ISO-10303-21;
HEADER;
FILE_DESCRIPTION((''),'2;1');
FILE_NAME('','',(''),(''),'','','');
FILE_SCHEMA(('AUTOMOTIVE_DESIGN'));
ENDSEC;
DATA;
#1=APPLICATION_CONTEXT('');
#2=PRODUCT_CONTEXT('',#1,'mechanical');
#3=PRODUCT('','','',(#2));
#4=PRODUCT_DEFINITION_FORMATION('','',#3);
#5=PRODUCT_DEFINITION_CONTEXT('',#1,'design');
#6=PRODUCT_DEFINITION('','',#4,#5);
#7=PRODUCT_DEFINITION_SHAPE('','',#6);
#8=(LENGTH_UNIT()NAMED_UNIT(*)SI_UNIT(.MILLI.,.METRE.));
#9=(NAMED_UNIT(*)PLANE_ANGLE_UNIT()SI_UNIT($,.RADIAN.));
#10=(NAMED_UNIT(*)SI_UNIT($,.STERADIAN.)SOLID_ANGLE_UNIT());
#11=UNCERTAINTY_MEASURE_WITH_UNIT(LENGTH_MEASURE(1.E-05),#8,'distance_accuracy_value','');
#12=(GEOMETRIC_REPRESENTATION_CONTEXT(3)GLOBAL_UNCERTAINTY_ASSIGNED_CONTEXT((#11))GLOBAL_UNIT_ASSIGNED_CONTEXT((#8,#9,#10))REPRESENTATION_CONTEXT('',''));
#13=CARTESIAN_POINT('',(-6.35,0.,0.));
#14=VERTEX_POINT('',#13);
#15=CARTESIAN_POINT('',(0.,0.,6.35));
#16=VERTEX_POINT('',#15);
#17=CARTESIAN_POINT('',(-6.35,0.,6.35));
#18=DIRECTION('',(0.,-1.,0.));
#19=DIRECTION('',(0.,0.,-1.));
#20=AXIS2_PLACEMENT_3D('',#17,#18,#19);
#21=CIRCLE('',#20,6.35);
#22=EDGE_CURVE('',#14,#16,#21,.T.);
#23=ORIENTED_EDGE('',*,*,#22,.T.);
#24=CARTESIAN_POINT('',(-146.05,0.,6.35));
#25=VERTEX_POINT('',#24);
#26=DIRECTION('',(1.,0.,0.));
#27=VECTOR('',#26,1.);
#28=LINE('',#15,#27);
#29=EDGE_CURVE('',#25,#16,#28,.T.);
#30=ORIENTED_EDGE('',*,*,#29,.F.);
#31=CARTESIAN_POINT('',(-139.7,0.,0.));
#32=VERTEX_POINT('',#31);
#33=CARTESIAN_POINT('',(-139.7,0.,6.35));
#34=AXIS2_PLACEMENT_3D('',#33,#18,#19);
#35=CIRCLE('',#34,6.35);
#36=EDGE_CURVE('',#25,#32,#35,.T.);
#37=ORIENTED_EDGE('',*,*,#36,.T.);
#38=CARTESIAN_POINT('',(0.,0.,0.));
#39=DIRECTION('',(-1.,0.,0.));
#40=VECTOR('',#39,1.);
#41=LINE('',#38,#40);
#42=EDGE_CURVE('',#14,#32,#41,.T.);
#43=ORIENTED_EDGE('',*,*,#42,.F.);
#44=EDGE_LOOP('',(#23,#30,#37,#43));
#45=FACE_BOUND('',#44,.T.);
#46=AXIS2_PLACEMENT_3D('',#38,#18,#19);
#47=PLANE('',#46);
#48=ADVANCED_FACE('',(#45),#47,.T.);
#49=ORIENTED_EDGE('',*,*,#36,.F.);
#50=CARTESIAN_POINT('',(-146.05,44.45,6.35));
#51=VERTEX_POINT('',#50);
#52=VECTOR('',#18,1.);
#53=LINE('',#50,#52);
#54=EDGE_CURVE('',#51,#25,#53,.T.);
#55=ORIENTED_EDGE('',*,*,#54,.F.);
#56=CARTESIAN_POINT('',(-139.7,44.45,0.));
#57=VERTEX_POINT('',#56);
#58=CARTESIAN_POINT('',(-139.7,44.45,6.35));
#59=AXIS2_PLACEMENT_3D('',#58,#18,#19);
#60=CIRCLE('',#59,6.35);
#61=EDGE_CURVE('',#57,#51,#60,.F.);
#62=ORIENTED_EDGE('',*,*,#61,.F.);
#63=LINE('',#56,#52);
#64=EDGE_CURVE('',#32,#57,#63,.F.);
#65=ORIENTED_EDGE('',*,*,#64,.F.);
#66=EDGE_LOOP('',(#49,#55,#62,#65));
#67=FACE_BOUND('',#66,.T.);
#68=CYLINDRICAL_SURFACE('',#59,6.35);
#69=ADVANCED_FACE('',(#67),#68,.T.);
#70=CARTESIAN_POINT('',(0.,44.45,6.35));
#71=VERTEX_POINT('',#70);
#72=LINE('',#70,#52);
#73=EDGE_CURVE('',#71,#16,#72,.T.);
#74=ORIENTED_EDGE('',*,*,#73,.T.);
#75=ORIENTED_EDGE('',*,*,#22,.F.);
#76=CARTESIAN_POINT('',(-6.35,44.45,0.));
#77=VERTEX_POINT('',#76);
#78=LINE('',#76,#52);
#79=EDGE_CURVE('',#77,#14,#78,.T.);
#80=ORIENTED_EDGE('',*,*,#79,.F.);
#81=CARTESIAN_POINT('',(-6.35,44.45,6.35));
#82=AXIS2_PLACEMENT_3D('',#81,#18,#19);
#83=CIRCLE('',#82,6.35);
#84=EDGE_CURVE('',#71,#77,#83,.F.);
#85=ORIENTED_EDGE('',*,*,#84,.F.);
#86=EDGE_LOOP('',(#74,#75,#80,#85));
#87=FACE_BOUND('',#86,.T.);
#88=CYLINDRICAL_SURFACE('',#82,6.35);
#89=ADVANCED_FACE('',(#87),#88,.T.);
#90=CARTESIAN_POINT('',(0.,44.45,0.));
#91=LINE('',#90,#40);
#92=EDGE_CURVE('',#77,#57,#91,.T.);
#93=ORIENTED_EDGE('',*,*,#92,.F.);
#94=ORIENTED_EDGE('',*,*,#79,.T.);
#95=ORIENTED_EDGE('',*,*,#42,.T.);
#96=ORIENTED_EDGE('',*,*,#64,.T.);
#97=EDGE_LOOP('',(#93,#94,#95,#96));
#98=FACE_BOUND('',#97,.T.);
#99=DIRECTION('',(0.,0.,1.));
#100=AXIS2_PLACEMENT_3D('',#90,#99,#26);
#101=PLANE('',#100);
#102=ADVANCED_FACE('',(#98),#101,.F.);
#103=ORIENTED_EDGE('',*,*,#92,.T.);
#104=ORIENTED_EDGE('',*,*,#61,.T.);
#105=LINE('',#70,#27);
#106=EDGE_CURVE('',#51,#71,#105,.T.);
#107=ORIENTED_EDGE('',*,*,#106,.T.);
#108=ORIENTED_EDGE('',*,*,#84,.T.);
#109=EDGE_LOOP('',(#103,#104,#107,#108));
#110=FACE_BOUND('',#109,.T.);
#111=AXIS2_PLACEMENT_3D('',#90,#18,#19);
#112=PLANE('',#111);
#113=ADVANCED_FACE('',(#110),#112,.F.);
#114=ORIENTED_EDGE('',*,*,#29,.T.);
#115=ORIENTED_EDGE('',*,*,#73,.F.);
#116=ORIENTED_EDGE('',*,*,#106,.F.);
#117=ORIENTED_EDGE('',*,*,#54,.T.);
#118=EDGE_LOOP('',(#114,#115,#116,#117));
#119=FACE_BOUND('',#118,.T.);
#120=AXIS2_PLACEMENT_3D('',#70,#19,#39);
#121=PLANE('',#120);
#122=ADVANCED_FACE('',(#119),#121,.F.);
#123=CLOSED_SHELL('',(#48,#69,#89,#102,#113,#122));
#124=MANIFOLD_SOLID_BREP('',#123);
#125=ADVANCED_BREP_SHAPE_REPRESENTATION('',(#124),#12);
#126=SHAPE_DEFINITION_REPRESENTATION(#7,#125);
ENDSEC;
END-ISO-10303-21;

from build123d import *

# Parameters (mm, degrees)
SKETCH1_W           = 146.05
SKETCH1_H           = 6.35
BOSS_EXTRUDE1_DEPTH = 44.45
FILLET1_R           = 6.35


with BuildPart() as part:
    # Sketch1 → Boss-Extrude1 (new body)
    with BuildSketch(Plane(origin=(0, 0, 0), x_dir=(1, 0, 0), z_dir=(0, 1, 0))):
        with Locations((-73.025, -3.175)):
            Rectangle(SKETCH1_W, SKETCH1_H)
    extrude(amount=BOSS_EXTRUDE1_DEPTH)

    # Fillet1
    fillet1_edges = [part.edges().sort_by_distance(p)[0] for p in [
        (-146.05, 22.225, 0),
        (0, 22.225, 0),
    ]]
    fillet(fillet1_edges, radius=FILLET1_R - 0.0001)  # a hair under: the kernel refuses the full size


solid = part.part
